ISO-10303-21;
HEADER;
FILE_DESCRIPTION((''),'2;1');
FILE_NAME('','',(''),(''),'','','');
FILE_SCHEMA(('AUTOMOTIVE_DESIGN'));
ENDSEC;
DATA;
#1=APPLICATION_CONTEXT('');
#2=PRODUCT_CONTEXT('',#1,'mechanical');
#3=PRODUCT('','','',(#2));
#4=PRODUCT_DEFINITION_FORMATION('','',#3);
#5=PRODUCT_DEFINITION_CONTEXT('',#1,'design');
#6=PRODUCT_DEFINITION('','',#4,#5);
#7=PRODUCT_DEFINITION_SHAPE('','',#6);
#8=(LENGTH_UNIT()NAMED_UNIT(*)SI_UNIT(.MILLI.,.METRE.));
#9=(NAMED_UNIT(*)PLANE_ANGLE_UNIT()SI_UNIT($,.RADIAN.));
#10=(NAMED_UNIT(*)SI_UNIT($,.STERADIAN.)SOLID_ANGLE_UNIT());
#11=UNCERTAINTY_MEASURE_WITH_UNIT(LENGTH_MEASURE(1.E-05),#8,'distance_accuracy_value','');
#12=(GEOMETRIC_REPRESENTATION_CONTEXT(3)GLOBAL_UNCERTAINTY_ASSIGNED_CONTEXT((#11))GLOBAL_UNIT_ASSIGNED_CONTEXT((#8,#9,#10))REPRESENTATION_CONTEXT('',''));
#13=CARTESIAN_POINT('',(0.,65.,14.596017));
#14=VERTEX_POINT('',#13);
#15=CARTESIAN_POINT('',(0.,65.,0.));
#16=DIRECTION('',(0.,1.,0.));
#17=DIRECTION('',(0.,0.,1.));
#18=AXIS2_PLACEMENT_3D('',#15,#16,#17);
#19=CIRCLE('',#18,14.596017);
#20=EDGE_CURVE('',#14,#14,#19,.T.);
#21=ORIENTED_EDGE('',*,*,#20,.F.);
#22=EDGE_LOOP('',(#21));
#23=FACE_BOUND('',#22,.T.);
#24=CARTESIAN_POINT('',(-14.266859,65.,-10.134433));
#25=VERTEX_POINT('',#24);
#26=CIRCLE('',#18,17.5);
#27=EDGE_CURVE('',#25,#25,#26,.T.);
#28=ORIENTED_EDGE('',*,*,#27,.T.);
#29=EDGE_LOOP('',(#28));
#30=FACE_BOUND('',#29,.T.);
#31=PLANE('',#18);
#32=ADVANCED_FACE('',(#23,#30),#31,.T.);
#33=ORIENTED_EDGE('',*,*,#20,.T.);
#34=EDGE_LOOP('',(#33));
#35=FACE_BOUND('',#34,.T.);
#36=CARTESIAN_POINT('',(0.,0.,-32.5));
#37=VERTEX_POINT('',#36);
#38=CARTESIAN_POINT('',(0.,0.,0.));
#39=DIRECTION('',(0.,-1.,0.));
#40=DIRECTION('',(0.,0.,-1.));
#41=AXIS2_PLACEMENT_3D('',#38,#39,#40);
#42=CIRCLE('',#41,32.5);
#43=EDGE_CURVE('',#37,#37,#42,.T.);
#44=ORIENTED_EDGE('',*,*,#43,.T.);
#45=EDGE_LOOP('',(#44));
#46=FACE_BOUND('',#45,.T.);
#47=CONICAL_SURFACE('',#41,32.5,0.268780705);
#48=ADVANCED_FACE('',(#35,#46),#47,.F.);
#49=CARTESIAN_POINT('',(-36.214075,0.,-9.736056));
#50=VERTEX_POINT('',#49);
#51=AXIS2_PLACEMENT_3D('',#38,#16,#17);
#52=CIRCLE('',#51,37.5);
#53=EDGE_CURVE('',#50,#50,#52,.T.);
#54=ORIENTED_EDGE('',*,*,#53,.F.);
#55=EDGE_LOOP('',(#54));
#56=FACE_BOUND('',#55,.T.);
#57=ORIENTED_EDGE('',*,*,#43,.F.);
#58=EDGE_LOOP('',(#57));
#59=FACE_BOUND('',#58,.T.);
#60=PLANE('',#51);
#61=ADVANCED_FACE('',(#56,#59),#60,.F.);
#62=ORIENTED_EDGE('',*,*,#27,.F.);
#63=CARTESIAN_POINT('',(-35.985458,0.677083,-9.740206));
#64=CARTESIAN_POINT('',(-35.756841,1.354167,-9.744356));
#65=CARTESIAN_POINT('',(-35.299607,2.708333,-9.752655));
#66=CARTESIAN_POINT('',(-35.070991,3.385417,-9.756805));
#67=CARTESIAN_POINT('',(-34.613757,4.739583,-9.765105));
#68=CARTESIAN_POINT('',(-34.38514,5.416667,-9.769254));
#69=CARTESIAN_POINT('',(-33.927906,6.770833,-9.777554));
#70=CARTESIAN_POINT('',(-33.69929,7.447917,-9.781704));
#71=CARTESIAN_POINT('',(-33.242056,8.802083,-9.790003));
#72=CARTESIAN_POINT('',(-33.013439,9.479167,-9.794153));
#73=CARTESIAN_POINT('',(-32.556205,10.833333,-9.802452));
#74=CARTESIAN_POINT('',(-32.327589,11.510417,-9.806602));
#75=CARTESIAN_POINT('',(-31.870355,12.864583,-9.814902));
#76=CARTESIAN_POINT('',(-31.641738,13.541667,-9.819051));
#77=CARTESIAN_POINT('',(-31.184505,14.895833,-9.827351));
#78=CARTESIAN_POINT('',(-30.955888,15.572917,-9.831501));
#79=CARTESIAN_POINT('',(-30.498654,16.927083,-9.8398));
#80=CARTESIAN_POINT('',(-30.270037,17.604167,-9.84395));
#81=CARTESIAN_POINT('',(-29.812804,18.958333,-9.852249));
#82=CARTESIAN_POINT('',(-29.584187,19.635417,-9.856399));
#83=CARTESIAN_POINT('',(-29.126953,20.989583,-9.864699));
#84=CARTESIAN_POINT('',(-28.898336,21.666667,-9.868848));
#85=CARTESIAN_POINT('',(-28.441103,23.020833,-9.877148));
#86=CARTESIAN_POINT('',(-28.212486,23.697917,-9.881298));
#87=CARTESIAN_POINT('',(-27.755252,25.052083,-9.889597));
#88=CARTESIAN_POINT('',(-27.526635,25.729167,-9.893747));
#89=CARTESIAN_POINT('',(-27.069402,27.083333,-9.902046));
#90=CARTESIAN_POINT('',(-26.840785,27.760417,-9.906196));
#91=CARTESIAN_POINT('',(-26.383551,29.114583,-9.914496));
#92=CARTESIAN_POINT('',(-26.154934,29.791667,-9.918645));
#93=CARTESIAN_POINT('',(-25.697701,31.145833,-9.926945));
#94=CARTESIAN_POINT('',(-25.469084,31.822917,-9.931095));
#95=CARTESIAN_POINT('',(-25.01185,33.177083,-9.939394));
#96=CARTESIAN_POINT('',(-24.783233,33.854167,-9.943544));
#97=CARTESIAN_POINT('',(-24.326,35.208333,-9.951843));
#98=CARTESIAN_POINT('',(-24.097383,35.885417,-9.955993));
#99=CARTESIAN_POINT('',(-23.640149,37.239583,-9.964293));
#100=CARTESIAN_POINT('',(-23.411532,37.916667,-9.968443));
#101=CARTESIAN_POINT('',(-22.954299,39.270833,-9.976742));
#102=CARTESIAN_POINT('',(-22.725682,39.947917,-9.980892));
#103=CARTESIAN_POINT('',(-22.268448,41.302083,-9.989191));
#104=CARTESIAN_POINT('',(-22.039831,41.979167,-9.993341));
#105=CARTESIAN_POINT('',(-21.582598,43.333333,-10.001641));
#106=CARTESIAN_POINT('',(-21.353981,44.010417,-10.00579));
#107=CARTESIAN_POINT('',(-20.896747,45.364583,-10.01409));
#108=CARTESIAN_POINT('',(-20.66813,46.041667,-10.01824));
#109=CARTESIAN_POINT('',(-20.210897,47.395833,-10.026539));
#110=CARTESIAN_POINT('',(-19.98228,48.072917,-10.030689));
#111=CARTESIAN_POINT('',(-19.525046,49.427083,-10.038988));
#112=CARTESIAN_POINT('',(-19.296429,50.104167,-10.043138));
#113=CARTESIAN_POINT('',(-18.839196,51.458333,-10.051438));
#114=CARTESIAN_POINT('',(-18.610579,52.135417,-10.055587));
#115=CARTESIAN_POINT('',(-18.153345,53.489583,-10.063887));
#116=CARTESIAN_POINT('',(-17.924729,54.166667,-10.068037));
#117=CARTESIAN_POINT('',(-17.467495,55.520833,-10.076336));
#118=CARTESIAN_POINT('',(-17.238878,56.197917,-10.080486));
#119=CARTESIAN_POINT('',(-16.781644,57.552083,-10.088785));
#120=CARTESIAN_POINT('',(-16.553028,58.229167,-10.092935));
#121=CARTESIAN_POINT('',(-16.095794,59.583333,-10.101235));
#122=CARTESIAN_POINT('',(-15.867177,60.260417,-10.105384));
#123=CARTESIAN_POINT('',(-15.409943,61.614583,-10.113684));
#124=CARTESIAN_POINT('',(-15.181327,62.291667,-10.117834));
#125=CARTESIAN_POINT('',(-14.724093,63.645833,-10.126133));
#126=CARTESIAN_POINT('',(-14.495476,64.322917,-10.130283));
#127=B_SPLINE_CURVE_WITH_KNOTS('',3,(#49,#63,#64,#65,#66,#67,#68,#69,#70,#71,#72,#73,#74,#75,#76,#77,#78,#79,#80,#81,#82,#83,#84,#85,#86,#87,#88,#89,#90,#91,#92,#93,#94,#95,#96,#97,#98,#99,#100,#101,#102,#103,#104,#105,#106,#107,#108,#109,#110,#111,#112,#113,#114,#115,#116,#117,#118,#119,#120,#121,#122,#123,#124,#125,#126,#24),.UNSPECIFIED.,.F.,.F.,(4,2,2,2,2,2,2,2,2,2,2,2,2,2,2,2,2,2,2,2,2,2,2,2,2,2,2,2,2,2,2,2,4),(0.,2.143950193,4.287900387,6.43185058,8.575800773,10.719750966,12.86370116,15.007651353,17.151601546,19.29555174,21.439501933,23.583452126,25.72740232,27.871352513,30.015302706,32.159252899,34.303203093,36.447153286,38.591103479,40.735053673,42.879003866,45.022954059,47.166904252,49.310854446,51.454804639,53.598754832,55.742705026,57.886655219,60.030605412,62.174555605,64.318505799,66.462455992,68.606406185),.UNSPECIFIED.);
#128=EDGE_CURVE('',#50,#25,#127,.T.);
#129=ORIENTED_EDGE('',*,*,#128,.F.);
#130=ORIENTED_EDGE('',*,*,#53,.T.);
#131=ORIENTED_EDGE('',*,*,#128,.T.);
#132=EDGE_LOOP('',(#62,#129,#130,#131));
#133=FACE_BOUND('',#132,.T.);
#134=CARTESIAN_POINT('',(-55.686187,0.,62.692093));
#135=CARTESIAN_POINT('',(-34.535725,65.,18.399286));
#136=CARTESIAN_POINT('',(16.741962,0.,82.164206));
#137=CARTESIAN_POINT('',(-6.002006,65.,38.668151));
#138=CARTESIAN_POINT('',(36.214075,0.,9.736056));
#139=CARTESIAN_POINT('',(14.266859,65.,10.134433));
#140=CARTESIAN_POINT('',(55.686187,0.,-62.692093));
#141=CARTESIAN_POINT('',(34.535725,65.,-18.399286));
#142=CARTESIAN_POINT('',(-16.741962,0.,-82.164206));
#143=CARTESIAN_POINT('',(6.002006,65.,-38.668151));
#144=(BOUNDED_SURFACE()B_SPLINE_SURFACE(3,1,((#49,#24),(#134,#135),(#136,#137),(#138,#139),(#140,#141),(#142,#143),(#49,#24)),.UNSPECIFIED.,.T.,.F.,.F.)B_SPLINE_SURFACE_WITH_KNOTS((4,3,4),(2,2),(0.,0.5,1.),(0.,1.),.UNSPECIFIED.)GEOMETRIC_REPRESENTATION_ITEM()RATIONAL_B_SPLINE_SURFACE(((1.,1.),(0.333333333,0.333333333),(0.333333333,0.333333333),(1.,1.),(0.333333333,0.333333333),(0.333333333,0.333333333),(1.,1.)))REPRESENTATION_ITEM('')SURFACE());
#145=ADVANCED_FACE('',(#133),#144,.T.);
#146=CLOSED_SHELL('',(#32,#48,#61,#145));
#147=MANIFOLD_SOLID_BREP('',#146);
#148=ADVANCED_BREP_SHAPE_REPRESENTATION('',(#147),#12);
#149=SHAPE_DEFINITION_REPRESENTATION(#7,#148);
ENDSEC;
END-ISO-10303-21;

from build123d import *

# Parameters (mm, degrees)
SKETCH_7_R          = 32.5
CUT_EXTRUDE_6_DEPTH = 84.889808845
CUT_EXTRUDE_6_DRAFT = -15.4


with BuildPart() as part:
    # 放样6: read off the stored shape, not the designer's step
    # 放样6: loft between two sections, ruled curve by curve
    loft_6_from = [
        Edge.make_bspline([(-36.214074736, 0, -9.736056237), (-55.686187209, 0, 62.692093235), (16.741962262, 0, 82.164205708), (36.214074736, 0, 9.736056237), (55.686187209, 0, -62.692093235), (-16.741962262, 0, -82.164205708), (-36.214074736, 0, -9.736056237)], [0, 0, 0, 0, 0.5, 0.5, 0.5, 1, 1, 1, 1], 3, [1, 0.333333333, 0.333333333, 1, 0.333333333, 0.333333333, 1]),
    ]
    loft_6_to = [
        Edge.make_bspline([(-14.266859289, 65, -10.134432694), (-34.535724677, 65, 18.399285883), (-6.0020061, 65, 38.668151272), (14.266859289, 65, 10.134432694), (34.535724677, 65, -18.399285883), (6.0020061, 65, -38.668151272), (-14.266859289, 65, -10.134432694)], [0, 0, 0, 0, 0.5, 0.5, 0.5, 1, 1, 1, 1], 3, [1, 0.333333333, 0.333333333, 1, 0.333333333, 0.333333333, 1]),
    ]
    loft_6 = Solid(Shell([*[Face.make_surface_from_curves(loft_6_from[k], loft_6_to[k]) for k in range(1)], Face(Wire(loft_6_from)), Face(Wire(loft_6_to))]))
    add(loft_6)


with BuildPart() as cut_extrude_6_tool:
    # 草图7 → 切除-拉伸6 (with draft: the straight prism first)
    with BuildSketch(Plane(origin=(0, 0, 0), x_dir=(-1, 0, 0), z_dir=(0, -1, 0))):
        Circle(SKETCH_7_R)
    extrude(amount=-CUT_EXTRUDE_6_DEPTH)
    # 切除-拉伸6: the draft: its side faces are tilted about the plane it starts from
    cut_extrude_6_sides = [cut_extrude_6_tool.faces().sort_by_distance(p)[0] for p in [
        (32.5, 42.444904422, 0),
    ]]
    draft(cut_extrude_6_sides, Plane(origin=(0, 0, 0), x_dir=(-1, 0, 0), z_dir=(0, -1, 0)), CUT_EXTRUDE_6_DRAFT)


with BuildPart() as part_1:
    add(part.part)

    # 切除-拉伸6: cut by cut_extrude_6_tool
    add(cut_extrude_6_tool.part, mode=Mode.SUBTRACT)


solid = part_1.part
